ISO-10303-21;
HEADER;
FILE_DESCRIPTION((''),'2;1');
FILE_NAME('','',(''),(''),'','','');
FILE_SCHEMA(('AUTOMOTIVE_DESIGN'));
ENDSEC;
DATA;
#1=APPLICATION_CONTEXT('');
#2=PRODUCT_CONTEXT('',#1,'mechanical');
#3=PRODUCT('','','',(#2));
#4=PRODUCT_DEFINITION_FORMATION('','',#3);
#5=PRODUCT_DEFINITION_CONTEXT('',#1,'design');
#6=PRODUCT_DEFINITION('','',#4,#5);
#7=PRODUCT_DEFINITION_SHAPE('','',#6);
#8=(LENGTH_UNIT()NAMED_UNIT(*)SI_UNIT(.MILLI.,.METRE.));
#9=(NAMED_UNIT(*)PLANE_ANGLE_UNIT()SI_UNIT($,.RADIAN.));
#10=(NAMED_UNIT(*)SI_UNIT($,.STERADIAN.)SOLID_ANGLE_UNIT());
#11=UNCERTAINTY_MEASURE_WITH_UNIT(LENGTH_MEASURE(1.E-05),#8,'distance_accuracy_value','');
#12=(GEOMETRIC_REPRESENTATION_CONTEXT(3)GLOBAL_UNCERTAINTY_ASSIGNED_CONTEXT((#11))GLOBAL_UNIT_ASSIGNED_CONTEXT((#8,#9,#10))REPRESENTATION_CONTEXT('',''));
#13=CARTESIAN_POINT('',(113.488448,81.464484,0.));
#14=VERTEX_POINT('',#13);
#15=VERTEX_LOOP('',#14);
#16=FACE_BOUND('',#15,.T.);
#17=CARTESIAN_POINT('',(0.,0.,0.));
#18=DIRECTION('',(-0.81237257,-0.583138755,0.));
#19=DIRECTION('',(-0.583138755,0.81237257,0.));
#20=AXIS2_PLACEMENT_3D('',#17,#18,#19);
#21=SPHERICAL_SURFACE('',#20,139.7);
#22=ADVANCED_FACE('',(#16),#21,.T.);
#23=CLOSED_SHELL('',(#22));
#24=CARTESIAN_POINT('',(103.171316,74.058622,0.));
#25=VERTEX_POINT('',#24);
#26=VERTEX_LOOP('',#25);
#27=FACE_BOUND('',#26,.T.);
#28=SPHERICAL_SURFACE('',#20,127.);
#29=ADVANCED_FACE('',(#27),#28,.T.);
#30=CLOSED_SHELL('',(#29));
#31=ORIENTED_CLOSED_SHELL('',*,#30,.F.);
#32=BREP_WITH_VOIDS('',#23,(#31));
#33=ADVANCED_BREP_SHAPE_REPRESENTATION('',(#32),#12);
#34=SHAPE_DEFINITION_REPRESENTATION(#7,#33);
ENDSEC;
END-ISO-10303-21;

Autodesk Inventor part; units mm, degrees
ref_plane "YZ Plane" through (0, 0, 0) normal (1, 0, 0) x (0, 1, 0)
ref_plane "XZ Plane" through (0, 0, 0) normal (0, 1, 0) x (-1, 0, 0)
ref_plane "XY Plane" through (0, 0, 0) normal (0, 0, 1) x (1, 0, 0)
sketch "Sketch1" plane through (0, 0, 0) normal (0, 0, 1) x (1, 0, 0)
  circle A0 centre (0, 0) radius 139.7
  line L0 (113.488448, 81.464484) -> (-113.488448, -81.464484)
  dimension "d0" = 279.4
revolve "Revolution1" add sketch "Sketch1" angle 360 about axis through (113.488448, 81.464484, 0) along (-0.8123726, -0.5831388, 0) picked at (-24.909298, 39.344394) contours L0 A0
shell "Shell1" thickness 12.7 removed faces 0
properties part number "bodySphere" material "Polycarbonate, Clear"
